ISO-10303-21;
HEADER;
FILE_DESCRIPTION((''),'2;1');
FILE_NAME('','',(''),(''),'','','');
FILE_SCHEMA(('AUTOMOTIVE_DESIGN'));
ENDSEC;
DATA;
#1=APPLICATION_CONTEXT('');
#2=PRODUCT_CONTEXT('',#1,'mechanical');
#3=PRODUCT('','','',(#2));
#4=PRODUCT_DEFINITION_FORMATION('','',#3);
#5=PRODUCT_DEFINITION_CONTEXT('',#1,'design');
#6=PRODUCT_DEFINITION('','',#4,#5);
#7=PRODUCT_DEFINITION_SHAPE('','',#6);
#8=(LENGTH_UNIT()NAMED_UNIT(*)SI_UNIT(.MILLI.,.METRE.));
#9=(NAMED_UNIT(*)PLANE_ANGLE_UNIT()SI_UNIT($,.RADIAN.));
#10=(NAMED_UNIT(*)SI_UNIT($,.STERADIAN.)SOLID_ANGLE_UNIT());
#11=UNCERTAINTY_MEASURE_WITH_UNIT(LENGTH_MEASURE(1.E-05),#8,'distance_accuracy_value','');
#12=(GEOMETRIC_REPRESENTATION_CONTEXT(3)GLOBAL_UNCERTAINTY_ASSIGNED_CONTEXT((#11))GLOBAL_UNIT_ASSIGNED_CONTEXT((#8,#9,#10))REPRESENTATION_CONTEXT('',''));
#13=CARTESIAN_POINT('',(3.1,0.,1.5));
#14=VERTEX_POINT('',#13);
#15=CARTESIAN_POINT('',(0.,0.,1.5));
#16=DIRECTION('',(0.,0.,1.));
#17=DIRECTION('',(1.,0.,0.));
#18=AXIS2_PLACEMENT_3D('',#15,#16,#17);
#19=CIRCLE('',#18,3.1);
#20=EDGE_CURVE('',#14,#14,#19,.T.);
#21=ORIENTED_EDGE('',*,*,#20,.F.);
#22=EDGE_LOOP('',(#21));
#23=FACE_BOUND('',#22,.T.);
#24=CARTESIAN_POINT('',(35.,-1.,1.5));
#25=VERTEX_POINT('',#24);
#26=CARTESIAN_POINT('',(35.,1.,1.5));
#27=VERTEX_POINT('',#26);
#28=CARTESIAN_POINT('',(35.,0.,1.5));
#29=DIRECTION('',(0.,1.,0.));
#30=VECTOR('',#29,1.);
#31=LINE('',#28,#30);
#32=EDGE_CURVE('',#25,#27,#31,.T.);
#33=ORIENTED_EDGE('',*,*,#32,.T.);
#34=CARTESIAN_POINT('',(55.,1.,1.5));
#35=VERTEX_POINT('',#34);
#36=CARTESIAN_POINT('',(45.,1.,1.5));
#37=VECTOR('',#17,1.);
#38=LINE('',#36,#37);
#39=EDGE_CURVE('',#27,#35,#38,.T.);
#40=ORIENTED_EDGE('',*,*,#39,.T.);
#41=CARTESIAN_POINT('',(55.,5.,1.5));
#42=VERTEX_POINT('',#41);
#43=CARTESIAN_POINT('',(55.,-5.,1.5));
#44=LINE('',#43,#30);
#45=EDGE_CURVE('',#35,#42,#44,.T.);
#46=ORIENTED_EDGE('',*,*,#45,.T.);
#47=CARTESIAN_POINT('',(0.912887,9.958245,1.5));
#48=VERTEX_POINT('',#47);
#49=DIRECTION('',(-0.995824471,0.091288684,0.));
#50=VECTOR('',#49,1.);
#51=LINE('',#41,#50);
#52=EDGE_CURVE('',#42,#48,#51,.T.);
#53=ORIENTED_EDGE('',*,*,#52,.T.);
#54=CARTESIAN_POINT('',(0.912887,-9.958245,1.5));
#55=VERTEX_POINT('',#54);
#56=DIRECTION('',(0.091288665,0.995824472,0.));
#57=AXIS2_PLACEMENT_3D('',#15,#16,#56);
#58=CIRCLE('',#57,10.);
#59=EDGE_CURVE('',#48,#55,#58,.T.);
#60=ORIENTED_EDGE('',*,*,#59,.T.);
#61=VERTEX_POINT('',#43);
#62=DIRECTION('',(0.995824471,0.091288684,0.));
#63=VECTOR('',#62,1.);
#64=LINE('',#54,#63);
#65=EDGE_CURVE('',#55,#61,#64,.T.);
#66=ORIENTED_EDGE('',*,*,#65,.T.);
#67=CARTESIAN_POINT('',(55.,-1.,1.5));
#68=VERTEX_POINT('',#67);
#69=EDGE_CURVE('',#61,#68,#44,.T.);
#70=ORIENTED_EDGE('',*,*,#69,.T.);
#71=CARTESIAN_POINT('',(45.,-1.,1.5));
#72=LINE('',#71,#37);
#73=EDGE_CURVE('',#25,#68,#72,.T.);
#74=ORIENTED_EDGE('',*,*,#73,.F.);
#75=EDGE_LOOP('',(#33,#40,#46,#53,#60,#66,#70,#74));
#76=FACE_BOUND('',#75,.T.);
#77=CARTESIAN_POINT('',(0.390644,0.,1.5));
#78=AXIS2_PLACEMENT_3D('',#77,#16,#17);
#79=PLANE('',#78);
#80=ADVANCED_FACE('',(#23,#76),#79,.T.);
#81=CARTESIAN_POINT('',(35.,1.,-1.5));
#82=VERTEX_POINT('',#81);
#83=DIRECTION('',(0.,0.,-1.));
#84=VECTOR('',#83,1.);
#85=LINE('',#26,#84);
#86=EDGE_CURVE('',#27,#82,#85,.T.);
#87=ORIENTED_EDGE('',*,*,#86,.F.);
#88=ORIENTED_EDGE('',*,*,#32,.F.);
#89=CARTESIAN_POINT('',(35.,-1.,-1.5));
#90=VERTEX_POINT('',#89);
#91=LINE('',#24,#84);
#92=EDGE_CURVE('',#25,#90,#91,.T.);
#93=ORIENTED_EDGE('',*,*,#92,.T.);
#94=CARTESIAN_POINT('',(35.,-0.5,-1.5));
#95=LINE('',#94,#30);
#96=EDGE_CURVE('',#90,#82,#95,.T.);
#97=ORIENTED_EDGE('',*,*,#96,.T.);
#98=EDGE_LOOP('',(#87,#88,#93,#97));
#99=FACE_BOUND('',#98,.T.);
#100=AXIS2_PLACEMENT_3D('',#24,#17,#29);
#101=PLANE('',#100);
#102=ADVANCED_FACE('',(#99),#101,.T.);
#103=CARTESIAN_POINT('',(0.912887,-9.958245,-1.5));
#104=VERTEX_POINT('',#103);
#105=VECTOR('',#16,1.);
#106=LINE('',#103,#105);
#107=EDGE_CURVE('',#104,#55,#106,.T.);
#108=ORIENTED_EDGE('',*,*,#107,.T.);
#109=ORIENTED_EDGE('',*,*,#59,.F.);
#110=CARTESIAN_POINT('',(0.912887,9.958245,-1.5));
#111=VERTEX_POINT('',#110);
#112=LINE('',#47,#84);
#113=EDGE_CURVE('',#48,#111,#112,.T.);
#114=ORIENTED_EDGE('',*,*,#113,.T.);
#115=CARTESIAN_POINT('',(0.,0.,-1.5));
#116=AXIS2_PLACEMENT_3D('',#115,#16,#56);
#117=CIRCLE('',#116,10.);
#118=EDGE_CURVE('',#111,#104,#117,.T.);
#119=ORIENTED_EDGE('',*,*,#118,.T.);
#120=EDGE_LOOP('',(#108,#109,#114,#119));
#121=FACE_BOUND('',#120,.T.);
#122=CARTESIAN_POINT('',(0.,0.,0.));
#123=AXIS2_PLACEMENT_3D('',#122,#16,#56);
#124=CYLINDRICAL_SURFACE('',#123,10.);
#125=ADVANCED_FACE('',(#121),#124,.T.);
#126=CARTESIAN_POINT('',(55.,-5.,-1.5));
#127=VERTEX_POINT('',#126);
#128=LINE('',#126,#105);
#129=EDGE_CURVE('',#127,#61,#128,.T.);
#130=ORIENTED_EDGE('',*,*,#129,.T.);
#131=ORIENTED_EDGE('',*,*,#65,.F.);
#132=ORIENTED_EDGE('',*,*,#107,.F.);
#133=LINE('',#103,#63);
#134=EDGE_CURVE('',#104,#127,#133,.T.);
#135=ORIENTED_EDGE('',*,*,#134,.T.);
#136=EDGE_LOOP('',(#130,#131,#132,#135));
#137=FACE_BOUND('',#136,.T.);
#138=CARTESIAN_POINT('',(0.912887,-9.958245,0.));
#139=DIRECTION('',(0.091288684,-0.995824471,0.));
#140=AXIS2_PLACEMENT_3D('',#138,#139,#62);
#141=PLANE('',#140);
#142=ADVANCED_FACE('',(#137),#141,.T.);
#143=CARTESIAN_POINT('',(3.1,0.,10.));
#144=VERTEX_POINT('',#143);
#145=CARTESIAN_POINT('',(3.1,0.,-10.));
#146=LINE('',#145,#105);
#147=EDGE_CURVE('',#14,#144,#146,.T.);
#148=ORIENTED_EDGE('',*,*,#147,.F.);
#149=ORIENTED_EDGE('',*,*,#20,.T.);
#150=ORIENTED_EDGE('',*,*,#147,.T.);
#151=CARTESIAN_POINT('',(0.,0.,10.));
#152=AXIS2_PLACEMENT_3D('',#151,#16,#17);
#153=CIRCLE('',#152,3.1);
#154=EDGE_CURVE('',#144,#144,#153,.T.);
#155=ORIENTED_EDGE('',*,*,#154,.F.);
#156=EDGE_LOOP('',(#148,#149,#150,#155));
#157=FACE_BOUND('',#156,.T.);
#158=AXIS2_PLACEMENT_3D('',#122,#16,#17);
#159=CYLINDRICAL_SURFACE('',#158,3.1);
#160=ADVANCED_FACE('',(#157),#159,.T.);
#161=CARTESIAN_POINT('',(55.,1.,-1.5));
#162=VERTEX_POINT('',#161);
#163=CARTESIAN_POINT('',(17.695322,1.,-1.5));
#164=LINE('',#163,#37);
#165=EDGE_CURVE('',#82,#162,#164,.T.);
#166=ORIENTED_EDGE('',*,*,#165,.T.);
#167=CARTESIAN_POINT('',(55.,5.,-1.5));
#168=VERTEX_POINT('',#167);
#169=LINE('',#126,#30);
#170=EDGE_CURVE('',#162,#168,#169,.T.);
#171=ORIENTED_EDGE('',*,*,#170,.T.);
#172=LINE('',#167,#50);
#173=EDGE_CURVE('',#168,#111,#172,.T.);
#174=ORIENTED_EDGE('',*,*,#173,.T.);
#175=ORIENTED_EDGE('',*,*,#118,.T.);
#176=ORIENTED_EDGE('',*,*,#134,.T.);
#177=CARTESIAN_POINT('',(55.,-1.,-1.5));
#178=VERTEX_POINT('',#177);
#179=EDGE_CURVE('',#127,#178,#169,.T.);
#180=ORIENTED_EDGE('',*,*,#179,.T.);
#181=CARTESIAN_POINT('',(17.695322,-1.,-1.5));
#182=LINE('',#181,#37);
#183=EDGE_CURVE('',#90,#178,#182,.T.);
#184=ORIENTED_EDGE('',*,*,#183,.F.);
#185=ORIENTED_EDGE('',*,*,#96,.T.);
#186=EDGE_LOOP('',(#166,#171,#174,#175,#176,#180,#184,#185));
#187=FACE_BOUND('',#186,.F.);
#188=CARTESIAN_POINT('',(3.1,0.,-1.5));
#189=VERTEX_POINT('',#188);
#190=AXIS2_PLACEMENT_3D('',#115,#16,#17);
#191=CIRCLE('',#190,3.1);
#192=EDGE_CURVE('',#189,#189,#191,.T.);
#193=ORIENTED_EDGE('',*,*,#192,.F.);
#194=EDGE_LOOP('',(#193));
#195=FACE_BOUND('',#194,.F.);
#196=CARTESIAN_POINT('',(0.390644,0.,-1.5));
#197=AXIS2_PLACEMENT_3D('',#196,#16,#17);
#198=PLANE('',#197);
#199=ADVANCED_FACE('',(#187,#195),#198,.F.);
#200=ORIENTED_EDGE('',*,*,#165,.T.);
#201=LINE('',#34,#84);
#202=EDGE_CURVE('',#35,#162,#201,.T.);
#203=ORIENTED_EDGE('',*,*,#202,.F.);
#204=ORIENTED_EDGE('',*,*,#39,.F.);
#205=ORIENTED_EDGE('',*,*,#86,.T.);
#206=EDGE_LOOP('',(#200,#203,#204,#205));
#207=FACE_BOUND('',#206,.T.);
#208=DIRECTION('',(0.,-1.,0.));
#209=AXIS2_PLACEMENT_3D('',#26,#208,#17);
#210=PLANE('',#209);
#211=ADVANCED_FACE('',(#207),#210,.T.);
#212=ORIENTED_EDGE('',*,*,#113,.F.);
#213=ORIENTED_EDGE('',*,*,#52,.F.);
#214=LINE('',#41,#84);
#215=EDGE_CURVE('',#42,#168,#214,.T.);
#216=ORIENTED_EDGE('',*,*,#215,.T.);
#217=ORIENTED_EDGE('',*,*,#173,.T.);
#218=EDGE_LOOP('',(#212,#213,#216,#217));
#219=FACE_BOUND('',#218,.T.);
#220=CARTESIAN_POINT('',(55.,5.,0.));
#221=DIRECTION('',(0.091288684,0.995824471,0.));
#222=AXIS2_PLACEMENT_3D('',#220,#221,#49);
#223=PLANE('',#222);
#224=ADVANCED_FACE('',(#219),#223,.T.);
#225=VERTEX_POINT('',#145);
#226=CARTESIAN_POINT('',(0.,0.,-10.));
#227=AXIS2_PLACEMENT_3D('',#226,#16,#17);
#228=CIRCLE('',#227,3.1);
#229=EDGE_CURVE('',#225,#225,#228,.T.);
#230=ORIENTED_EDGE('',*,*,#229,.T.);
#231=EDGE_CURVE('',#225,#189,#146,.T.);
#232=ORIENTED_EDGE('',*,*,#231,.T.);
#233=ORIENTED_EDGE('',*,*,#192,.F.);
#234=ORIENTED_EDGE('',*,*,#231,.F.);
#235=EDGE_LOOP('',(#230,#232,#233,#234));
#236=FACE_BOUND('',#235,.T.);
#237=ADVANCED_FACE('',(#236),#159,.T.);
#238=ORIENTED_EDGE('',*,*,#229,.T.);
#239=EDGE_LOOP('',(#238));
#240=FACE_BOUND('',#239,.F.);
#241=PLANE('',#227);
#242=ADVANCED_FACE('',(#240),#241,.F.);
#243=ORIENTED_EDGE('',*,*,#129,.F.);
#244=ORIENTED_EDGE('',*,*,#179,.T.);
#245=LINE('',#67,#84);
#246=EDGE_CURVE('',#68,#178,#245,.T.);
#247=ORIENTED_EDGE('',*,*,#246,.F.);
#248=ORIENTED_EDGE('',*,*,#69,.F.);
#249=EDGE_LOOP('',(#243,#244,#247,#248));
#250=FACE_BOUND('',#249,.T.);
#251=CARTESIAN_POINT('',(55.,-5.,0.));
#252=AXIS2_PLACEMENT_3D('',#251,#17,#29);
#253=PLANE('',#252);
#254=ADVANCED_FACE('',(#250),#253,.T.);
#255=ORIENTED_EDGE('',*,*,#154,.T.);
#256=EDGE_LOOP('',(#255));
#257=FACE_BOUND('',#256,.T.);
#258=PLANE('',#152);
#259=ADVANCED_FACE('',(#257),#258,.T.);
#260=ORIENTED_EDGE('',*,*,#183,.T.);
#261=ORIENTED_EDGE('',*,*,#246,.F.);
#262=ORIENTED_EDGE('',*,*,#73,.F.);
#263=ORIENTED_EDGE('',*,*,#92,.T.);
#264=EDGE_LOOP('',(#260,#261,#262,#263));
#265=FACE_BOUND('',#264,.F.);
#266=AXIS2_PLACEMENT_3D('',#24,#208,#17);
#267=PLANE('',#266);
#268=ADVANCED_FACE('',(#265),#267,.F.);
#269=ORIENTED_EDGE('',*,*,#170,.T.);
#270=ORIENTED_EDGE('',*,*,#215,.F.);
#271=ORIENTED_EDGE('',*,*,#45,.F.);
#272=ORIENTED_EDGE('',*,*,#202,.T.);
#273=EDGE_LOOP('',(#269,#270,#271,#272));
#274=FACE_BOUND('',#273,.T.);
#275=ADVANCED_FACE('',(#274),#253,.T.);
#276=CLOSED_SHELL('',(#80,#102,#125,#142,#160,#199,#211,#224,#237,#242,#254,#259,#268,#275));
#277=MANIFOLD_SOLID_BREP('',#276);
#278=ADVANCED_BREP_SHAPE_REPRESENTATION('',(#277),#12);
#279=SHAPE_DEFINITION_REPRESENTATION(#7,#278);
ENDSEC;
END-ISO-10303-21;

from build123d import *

# Parameters (mm, degrees)
F0_R     = 3.1
F1_DEPTH = 10
F2_DEPTH = 1.5
F3_W     = 20
F3_H     = 2
F4_DEPTH = 11.501


# Not quite as in the source:
# - a feature names something its author has since deleted; it is built from what else it names


with BuildPart() as f1:
    # F0 (on Top) → F1 (new body, symmetric)
    with BuildSketch(Plane.XY):
        Circle(F0_R)
    extrude(amount=F1_DEPTH, both=True)

    # F0 (on Top) → F2 (join, symmetric)
    with BuildSketch(Plane.XY):
        with BuildLine():
            ThreePointArc((0.9128866521, -9.9582447229), (7.3867742121, -6.7405909785), (10, 0))
            ThreePointArc((10, 0), (7.3867742121, 6.7405909785), (0.9128866521, 9.9582447229))
            ThreePointArc((0.9128866521, 9.9582447229), (-10, 0), (0.9128866521, -9.9582447229))
        make_face()
        Circle(F0_R, mode=Mode.SUBTRACT)
        with BuildLine():
            ThreePointArc((0.9128866521, 9.9582447229), (7.3867742121, 6.7405909785), (10, 0))
            ThreePointArc((10, 0), (7.3867742121, -6.7405909785), (0.9128866521, -9.9582447229))
            Line((0.9128866521, -9.9582447229), (55, -5))
            Line((55, -5), (55, 5))
            Line((55, 5), (0.9128866521, 9.9582447229))
        make_face()
    extrude(amount=F2_DEPTH, both=True)

    # F3 (on face) → F4 (cut, through all)
    with BuildSketch(Plane.XY.offset(1.5)):
        with Locations((45, 0)):
            Rectangle(F3_W, F3_H)
    extrude(amount=-F4_DEPTH, mode=Mode.SUBTRACT)


solid = f1.part
